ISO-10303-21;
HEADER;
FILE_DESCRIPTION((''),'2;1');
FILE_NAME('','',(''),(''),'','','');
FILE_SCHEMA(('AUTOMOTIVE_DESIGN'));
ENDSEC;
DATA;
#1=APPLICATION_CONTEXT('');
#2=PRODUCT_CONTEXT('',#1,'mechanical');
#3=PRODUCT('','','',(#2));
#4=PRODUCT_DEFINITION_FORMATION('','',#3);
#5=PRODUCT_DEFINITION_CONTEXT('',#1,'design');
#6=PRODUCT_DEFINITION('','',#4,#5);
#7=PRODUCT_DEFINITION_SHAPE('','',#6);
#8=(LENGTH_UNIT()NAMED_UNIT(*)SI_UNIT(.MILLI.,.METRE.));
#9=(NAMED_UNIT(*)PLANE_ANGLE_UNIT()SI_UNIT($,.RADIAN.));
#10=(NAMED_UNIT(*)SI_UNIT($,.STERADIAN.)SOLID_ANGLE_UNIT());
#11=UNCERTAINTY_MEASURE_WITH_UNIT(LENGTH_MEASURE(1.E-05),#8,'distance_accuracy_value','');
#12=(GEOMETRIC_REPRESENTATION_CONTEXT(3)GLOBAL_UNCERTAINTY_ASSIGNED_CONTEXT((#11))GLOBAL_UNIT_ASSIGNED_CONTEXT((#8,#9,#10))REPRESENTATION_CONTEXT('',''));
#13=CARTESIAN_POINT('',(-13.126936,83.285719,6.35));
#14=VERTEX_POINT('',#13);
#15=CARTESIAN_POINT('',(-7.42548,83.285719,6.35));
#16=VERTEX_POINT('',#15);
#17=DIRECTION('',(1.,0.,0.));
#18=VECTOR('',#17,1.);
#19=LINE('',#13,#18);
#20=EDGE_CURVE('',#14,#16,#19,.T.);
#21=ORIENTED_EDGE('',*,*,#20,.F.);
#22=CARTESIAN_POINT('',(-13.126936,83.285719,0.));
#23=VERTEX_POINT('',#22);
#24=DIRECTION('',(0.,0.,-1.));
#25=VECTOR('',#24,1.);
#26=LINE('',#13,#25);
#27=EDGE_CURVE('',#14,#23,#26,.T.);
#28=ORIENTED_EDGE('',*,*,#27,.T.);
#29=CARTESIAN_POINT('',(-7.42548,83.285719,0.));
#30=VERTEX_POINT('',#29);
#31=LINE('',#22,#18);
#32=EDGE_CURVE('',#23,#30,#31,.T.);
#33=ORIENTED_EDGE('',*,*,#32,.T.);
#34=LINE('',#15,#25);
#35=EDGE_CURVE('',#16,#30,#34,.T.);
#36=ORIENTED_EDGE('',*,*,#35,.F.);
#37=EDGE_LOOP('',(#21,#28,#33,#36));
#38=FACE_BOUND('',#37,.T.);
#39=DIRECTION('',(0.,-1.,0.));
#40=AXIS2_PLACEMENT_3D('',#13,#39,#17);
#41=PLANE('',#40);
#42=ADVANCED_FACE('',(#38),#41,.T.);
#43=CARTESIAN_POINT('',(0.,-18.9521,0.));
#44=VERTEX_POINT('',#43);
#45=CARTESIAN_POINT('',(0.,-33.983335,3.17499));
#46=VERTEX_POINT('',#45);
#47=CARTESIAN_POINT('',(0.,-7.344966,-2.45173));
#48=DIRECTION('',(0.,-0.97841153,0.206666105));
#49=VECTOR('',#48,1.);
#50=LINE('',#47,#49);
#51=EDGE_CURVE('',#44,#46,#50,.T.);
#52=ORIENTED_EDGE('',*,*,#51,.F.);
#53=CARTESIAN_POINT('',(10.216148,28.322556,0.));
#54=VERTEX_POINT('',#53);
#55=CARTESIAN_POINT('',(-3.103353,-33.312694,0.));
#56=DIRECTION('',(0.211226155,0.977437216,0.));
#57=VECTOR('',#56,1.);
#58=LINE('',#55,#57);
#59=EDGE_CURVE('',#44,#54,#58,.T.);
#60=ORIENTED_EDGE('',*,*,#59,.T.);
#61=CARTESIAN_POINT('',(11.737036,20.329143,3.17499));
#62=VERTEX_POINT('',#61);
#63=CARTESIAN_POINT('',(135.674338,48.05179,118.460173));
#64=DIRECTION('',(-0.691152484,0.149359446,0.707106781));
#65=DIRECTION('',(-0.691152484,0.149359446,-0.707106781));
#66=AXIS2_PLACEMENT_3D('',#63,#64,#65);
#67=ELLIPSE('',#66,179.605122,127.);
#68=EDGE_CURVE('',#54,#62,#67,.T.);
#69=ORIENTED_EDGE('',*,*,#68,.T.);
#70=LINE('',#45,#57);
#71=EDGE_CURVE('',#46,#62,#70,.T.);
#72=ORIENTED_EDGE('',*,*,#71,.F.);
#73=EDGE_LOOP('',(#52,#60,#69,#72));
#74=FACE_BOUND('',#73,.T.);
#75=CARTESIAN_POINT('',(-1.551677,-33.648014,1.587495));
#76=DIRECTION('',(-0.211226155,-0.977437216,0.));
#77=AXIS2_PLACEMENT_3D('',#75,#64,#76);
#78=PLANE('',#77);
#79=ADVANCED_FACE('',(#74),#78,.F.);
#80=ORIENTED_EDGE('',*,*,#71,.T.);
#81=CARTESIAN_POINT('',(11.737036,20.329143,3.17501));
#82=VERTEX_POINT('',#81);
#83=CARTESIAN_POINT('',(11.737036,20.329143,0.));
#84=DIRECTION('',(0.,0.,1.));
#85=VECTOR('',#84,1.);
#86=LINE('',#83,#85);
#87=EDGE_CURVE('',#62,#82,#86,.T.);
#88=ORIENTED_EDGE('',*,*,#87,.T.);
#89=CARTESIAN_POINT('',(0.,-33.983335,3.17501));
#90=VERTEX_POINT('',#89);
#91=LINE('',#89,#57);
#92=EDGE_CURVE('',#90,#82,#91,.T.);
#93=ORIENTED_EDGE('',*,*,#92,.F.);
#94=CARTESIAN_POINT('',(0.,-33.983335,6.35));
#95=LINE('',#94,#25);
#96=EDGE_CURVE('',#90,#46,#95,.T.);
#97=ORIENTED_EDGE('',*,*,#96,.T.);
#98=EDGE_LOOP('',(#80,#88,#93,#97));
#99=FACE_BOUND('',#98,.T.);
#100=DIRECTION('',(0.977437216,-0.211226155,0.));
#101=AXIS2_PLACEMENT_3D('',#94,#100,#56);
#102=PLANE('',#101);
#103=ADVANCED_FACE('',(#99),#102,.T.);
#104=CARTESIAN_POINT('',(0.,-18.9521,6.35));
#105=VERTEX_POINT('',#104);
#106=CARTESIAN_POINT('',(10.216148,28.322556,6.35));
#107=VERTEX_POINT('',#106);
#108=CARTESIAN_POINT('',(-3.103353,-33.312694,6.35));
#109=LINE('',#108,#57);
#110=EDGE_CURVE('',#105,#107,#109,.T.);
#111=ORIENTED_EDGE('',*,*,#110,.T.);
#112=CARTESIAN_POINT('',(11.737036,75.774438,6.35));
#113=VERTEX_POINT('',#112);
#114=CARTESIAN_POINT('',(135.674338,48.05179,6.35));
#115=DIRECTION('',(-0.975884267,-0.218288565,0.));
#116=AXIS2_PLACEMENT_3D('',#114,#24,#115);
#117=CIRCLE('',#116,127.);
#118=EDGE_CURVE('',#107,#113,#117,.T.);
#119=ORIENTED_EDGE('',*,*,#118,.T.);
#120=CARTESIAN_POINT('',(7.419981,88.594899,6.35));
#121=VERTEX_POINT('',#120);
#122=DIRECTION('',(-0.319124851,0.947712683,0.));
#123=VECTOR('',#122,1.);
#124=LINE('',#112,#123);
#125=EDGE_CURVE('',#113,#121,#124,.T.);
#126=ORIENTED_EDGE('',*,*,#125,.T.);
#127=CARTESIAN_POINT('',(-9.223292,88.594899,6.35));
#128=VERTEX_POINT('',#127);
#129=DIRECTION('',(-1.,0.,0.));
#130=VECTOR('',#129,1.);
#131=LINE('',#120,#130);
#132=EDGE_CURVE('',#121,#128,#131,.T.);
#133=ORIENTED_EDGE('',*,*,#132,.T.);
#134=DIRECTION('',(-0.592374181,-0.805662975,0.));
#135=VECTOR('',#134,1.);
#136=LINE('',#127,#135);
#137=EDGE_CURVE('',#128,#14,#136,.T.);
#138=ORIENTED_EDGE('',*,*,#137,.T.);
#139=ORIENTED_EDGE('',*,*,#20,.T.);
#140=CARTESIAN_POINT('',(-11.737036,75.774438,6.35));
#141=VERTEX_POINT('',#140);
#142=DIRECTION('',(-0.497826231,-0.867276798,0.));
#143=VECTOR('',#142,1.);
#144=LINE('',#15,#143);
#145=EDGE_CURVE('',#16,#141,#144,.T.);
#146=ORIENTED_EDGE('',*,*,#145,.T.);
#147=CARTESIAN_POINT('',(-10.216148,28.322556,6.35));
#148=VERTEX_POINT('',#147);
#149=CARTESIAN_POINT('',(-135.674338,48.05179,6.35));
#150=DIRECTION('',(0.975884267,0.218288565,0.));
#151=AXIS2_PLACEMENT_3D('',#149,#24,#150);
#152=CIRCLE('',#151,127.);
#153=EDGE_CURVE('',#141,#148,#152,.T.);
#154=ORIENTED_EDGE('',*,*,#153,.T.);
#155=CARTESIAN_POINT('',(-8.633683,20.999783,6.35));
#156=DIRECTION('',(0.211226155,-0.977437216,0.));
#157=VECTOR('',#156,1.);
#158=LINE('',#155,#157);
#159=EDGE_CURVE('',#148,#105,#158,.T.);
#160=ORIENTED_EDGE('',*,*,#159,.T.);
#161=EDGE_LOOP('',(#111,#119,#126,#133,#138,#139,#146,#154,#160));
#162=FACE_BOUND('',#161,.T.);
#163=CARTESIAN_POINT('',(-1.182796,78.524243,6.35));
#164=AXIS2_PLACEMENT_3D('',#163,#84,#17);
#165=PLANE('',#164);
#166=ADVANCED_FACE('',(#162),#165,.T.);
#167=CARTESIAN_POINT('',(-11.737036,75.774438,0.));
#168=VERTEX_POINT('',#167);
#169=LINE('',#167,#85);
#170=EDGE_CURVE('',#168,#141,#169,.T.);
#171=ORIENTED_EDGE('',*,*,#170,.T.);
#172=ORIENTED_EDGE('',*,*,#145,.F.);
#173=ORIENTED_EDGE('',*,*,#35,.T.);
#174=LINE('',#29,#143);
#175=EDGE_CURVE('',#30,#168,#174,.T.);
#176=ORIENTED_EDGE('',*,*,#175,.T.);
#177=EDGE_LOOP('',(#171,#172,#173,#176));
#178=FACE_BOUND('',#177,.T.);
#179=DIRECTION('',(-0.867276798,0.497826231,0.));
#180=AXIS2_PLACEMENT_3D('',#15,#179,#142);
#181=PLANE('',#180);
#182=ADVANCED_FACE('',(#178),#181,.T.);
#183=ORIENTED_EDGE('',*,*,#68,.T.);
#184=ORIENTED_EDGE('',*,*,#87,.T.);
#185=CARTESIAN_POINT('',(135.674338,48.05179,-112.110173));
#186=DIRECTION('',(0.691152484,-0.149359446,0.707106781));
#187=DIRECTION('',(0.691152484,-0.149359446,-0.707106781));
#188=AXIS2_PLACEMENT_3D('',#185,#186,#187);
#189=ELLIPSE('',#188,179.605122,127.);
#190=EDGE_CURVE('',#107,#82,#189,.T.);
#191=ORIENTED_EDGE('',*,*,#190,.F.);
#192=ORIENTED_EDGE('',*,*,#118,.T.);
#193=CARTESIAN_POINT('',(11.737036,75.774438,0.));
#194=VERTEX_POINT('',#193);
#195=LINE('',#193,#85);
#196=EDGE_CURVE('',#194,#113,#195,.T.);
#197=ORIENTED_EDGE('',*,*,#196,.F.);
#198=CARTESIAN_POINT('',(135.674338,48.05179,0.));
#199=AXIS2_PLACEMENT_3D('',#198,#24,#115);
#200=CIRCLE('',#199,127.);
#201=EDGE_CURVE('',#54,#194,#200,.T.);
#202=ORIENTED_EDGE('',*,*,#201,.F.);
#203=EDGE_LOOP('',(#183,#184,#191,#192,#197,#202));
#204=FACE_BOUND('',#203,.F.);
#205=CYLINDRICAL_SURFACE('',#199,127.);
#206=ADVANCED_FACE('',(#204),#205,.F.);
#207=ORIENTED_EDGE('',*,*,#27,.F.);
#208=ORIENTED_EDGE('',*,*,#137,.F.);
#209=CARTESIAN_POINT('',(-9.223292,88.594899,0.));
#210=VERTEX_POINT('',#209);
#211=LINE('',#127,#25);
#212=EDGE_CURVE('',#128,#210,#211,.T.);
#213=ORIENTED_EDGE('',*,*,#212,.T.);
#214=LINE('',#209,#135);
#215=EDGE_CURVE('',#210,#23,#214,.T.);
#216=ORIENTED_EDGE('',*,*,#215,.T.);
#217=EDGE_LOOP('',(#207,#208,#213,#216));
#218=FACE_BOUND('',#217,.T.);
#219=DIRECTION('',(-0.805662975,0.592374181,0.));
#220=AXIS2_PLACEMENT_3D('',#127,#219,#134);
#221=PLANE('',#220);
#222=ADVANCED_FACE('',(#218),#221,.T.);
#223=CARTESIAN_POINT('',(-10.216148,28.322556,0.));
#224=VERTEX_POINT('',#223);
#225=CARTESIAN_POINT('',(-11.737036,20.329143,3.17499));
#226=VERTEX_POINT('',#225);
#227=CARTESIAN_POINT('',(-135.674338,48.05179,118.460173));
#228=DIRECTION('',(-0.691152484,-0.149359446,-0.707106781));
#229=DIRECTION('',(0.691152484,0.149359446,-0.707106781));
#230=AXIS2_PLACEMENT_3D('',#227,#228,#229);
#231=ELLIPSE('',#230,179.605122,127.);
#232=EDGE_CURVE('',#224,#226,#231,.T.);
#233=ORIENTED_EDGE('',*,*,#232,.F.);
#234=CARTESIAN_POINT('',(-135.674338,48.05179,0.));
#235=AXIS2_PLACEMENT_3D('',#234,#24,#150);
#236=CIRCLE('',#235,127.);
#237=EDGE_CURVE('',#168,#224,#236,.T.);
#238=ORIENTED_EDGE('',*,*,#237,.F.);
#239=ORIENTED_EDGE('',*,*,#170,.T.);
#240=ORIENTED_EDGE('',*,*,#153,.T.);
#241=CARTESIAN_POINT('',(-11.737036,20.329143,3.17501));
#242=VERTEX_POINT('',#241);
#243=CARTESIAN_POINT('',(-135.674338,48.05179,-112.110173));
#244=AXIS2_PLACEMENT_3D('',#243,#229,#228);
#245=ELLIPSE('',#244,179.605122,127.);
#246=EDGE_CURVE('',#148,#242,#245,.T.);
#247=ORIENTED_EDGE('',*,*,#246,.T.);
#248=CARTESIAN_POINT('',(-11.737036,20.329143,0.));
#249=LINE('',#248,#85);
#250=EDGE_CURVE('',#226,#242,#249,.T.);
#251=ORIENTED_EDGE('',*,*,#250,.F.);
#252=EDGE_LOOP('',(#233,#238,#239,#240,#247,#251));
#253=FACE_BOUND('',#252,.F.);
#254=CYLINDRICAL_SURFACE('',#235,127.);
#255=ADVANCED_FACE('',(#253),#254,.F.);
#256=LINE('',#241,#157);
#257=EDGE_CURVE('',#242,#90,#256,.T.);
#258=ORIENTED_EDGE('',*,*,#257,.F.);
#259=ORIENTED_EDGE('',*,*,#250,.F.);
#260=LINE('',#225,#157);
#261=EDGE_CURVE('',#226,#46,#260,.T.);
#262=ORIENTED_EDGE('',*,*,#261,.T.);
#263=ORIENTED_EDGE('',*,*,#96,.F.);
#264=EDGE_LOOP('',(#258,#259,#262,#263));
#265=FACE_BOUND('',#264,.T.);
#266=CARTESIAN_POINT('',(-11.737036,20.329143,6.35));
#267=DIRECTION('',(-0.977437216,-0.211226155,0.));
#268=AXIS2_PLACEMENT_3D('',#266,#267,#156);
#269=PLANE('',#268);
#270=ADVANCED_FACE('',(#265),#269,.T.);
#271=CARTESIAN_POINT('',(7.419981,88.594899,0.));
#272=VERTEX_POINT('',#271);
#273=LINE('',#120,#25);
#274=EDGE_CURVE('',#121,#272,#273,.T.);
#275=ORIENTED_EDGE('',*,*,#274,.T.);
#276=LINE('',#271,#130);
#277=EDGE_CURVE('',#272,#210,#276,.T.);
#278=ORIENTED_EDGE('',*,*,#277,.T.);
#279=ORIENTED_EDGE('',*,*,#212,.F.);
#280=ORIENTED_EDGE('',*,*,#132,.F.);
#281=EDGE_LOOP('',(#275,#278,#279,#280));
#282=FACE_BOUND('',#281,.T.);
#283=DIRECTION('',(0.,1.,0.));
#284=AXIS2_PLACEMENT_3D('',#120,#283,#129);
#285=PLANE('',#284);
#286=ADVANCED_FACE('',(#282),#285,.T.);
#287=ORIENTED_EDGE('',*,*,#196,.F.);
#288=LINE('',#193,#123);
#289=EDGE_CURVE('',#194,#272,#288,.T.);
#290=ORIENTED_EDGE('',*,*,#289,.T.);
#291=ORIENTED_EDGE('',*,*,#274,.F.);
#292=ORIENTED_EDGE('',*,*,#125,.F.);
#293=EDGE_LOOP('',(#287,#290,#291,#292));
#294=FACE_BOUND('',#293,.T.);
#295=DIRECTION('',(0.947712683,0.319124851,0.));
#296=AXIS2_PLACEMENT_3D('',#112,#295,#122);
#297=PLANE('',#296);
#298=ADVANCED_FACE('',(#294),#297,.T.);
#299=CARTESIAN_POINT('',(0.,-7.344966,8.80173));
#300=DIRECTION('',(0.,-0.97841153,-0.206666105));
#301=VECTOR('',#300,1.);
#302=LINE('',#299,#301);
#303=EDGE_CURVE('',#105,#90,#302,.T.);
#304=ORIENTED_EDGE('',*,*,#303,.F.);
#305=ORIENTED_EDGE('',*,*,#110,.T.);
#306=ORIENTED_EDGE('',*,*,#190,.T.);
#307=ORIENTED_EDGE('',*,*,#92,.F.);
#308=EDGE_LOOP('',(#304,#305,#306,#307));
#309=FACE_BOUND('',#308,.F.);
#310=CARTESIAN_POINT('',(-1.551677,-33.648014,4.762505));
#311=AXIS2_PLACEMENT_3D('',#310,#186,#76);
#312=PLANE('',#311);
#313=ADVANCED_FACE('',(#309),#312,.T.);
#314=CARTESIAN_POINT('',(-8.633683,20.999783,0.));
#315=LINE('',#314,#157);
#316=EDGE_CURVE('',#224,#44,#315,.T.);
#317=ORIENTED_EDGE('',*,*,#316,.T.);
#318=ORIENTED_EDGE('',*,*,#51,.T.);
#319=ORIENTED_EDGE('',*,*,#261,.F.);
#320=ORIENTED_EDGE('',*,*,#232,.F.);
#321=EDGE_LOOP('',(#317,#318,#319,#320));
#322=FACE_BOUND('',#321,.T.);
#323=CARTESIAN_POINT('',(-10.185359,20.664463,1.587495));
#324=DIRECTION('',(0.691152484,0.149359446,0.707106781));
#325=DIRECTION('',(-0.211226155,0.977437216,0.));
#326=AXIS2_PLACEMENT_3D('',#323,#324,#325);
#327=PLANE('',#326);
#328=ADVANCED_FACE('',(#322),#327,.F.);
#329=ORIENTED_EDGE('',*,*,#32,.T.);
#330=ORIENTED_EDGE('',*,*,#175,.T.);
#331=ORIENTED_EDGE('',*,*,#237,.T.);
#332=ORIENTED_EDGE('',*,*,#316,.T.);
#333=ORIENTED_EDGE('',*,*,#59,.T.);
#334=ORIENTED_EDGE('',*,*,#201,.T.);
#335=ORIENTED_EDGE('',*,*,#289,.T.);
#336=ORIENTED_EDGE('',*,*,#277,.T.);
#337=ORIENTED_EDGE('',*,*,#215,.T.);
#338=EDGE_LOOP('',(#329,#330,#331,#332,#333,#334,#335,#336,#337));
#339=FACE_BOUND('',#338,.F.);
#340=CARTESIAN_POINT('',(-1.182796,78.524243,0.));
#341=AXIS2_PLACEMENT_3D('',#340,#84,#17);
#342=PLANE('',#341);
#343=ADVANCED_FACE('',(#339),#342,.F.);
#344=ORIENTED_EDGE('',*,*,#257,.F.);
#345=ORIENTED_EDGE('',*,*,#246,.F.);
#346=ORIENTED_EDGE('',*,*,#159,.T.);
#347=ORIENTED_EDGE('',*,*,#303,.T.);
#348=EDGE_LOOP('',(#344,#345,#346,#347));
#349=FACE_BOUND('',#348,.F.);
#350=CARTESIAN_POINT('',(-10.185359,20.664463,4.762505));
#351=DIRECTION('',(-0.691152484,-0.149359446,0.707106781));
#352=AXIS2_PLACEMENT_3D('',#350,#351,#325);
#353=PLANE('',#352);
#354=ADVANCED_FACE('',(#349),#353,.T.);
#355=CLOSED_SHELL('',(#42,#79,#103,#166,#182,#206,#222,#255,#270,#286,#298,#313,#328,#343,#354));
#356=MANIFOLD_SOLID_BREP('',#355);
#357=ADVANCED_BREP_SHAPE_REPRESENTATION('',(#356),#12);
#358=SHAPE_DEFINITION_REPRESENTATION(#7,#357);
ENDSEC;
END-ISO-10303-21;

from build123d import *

# Parameters (mm, degrees)
F1_DEPTH = 6.35
F3_DEPTH = 25.4
F5_DEPTH = 6.35
F6_SIZE  = 3.17499


# Not quite as in the source:
# - a fillet or chamfer is up to 0.001 mm smaller than in the source, because OpenCascade refuses the exact size


with BuildPart() as f1:
    # F0 (on Top) → F1 (new body)
    with BuildSketch(Plane.XY):
        Polygon((-21.1028610796, 36.5512275749), (-11.7370359251, 20.3291425525), (0, 29.516665265), (11.7370359251, 20.3291425525), (33.4666037048, 57.9658579735), (26.5181194991, 63.6764243245), (35.1014384706, 60.7974748498), (47.9729409095, 83.0915710438), (43.2239025831, 86.8056491017), (49.1863254635, 85.1932147405), (60.325, 104.4859649666), (44.45, 109.9852262806), (0, 63.5), (-44.45, 109.9852262806), (-60.325, 104.4859649666), (-49.1863254635, 85.1932147405), (-43.2239025831, 86.8056491017), (-47.9729409095, 83.0915710438), (-35.1014384706, 60.7974748498), (-26.5181194991, 63.6764243245), (-33.4666037048, 57.9658579735), align=None)
    extrude(amount=F1_DEPTH)

    # F2 (on face) → F3 (cut)
    with BuildSketch(Plane(origin=(0, 0, 0), x_dir=(1, 0, 0), z_dir=(0, 0, -1))):
        with BuildLine():
            ThreePointArc((-11.7370359251, -75.7744380392), (-8.6743378245, -48.0517902958), (-11.7370359251, -20.3291425525))
            Line((-11.7370359251, -20.3291425525), (-33.4666037048, -57.9658579735))
            Line((-33.4666037048, -57.9658579735), (-26.5181194991, -63.6764243245))
            Line((-26.5181194991, -63.6764243245), (-35.1014384706, -60.7974748498))
            Line((-35.1014384706, -60.7974748498), (-47.9729409095, -83.0915710438))
            Line((-47.9729409095, -83.0915710438), (-43.2239025831, -86.8056491017))
            Line((-43.2239025831, -86.8056491017), (-49.1863254635, -85.1932147405))
            Line((-49.1863254635, -85.1932147405), (-60.325, -104.4859649666))
            Line((-60.325, -104.4859649666), (-44.45, -109.9852262806))
            Line((-44.45, -109.9852262806), (-11.7370359251, -75.7744380392))
        make_face()
        with BuildLine():
            Line((33.4666037048, -57.9658579735), (11.7370359251, -20.3291425525))
            ThreePointArc((11.7370359251, -20.3291425525), (8.6743378245, -48.0517902958), (11.7370359251, -75.7744380392))
            Line((11.7370359251, -75.7744380392), (44.45, -109.9852262806))
            Line((44.45, -109.9852262806), (60.325, -104.4859649666))
            Line((60.325, -104.4859649666), (49.1863254635, -85.1932147405))
            Line((49.1863254635, -85.1932147405), (43.2239025831, -86.8056491017))
            Line((43.2239025831, -86.8056491017), (47.9729409095, -83.0915710438))
            Line((47.9729409095, -83.0915710438), (35.1014384706, -60.7974748498))
            Line((35.1014384706, -60.7974748498), (26.5181194991, -63.6764243245))
            Line((26.5181194991, -63.6764243245), (33.4666037048, -57.9658579735))
        make_face()
    extrude(amount=-F3_DEPTH, mode=Mode.SUBTRACT)

    # F4 (on face) → F5 (join)
    with BuildSketch(Plane.XY.offset(6.35)):
        Polygon((-7.4254795909, 83.2857191563), (-11.7370359251, 75.7744380392), (0, 63.5), (11.7370359251, 75.7744380392), (7.4199811484, 88.5948985815), (-9.2232923578, 88.5948985815), (-13.126935586, 83.2857191563), align=None)
        Polygon((0, 29.516665265), (-11.7370359251, 20.3291425525), (0, -33.983334735), (11.7370359251, 20.3291425525), align=None)
    extrude(amount=-F5_DEPTH)

    # F6 (size 3.175 in the source; OpenCascade refuses exactly that, so slightly less here)
    f6_edges = [f1.edges().sort_by_distance(p)[0] for p in [
        (5.868518, -6.827096, 6.35),
        (-5.868518, -6.827096, 6.35),
        (5.868518, -6.827096, 0),
        (-5.868518, -6.827096, 0),
    ]]
    chamfer(f6_edges, length=F6_SIZE)


solid = f1.part
